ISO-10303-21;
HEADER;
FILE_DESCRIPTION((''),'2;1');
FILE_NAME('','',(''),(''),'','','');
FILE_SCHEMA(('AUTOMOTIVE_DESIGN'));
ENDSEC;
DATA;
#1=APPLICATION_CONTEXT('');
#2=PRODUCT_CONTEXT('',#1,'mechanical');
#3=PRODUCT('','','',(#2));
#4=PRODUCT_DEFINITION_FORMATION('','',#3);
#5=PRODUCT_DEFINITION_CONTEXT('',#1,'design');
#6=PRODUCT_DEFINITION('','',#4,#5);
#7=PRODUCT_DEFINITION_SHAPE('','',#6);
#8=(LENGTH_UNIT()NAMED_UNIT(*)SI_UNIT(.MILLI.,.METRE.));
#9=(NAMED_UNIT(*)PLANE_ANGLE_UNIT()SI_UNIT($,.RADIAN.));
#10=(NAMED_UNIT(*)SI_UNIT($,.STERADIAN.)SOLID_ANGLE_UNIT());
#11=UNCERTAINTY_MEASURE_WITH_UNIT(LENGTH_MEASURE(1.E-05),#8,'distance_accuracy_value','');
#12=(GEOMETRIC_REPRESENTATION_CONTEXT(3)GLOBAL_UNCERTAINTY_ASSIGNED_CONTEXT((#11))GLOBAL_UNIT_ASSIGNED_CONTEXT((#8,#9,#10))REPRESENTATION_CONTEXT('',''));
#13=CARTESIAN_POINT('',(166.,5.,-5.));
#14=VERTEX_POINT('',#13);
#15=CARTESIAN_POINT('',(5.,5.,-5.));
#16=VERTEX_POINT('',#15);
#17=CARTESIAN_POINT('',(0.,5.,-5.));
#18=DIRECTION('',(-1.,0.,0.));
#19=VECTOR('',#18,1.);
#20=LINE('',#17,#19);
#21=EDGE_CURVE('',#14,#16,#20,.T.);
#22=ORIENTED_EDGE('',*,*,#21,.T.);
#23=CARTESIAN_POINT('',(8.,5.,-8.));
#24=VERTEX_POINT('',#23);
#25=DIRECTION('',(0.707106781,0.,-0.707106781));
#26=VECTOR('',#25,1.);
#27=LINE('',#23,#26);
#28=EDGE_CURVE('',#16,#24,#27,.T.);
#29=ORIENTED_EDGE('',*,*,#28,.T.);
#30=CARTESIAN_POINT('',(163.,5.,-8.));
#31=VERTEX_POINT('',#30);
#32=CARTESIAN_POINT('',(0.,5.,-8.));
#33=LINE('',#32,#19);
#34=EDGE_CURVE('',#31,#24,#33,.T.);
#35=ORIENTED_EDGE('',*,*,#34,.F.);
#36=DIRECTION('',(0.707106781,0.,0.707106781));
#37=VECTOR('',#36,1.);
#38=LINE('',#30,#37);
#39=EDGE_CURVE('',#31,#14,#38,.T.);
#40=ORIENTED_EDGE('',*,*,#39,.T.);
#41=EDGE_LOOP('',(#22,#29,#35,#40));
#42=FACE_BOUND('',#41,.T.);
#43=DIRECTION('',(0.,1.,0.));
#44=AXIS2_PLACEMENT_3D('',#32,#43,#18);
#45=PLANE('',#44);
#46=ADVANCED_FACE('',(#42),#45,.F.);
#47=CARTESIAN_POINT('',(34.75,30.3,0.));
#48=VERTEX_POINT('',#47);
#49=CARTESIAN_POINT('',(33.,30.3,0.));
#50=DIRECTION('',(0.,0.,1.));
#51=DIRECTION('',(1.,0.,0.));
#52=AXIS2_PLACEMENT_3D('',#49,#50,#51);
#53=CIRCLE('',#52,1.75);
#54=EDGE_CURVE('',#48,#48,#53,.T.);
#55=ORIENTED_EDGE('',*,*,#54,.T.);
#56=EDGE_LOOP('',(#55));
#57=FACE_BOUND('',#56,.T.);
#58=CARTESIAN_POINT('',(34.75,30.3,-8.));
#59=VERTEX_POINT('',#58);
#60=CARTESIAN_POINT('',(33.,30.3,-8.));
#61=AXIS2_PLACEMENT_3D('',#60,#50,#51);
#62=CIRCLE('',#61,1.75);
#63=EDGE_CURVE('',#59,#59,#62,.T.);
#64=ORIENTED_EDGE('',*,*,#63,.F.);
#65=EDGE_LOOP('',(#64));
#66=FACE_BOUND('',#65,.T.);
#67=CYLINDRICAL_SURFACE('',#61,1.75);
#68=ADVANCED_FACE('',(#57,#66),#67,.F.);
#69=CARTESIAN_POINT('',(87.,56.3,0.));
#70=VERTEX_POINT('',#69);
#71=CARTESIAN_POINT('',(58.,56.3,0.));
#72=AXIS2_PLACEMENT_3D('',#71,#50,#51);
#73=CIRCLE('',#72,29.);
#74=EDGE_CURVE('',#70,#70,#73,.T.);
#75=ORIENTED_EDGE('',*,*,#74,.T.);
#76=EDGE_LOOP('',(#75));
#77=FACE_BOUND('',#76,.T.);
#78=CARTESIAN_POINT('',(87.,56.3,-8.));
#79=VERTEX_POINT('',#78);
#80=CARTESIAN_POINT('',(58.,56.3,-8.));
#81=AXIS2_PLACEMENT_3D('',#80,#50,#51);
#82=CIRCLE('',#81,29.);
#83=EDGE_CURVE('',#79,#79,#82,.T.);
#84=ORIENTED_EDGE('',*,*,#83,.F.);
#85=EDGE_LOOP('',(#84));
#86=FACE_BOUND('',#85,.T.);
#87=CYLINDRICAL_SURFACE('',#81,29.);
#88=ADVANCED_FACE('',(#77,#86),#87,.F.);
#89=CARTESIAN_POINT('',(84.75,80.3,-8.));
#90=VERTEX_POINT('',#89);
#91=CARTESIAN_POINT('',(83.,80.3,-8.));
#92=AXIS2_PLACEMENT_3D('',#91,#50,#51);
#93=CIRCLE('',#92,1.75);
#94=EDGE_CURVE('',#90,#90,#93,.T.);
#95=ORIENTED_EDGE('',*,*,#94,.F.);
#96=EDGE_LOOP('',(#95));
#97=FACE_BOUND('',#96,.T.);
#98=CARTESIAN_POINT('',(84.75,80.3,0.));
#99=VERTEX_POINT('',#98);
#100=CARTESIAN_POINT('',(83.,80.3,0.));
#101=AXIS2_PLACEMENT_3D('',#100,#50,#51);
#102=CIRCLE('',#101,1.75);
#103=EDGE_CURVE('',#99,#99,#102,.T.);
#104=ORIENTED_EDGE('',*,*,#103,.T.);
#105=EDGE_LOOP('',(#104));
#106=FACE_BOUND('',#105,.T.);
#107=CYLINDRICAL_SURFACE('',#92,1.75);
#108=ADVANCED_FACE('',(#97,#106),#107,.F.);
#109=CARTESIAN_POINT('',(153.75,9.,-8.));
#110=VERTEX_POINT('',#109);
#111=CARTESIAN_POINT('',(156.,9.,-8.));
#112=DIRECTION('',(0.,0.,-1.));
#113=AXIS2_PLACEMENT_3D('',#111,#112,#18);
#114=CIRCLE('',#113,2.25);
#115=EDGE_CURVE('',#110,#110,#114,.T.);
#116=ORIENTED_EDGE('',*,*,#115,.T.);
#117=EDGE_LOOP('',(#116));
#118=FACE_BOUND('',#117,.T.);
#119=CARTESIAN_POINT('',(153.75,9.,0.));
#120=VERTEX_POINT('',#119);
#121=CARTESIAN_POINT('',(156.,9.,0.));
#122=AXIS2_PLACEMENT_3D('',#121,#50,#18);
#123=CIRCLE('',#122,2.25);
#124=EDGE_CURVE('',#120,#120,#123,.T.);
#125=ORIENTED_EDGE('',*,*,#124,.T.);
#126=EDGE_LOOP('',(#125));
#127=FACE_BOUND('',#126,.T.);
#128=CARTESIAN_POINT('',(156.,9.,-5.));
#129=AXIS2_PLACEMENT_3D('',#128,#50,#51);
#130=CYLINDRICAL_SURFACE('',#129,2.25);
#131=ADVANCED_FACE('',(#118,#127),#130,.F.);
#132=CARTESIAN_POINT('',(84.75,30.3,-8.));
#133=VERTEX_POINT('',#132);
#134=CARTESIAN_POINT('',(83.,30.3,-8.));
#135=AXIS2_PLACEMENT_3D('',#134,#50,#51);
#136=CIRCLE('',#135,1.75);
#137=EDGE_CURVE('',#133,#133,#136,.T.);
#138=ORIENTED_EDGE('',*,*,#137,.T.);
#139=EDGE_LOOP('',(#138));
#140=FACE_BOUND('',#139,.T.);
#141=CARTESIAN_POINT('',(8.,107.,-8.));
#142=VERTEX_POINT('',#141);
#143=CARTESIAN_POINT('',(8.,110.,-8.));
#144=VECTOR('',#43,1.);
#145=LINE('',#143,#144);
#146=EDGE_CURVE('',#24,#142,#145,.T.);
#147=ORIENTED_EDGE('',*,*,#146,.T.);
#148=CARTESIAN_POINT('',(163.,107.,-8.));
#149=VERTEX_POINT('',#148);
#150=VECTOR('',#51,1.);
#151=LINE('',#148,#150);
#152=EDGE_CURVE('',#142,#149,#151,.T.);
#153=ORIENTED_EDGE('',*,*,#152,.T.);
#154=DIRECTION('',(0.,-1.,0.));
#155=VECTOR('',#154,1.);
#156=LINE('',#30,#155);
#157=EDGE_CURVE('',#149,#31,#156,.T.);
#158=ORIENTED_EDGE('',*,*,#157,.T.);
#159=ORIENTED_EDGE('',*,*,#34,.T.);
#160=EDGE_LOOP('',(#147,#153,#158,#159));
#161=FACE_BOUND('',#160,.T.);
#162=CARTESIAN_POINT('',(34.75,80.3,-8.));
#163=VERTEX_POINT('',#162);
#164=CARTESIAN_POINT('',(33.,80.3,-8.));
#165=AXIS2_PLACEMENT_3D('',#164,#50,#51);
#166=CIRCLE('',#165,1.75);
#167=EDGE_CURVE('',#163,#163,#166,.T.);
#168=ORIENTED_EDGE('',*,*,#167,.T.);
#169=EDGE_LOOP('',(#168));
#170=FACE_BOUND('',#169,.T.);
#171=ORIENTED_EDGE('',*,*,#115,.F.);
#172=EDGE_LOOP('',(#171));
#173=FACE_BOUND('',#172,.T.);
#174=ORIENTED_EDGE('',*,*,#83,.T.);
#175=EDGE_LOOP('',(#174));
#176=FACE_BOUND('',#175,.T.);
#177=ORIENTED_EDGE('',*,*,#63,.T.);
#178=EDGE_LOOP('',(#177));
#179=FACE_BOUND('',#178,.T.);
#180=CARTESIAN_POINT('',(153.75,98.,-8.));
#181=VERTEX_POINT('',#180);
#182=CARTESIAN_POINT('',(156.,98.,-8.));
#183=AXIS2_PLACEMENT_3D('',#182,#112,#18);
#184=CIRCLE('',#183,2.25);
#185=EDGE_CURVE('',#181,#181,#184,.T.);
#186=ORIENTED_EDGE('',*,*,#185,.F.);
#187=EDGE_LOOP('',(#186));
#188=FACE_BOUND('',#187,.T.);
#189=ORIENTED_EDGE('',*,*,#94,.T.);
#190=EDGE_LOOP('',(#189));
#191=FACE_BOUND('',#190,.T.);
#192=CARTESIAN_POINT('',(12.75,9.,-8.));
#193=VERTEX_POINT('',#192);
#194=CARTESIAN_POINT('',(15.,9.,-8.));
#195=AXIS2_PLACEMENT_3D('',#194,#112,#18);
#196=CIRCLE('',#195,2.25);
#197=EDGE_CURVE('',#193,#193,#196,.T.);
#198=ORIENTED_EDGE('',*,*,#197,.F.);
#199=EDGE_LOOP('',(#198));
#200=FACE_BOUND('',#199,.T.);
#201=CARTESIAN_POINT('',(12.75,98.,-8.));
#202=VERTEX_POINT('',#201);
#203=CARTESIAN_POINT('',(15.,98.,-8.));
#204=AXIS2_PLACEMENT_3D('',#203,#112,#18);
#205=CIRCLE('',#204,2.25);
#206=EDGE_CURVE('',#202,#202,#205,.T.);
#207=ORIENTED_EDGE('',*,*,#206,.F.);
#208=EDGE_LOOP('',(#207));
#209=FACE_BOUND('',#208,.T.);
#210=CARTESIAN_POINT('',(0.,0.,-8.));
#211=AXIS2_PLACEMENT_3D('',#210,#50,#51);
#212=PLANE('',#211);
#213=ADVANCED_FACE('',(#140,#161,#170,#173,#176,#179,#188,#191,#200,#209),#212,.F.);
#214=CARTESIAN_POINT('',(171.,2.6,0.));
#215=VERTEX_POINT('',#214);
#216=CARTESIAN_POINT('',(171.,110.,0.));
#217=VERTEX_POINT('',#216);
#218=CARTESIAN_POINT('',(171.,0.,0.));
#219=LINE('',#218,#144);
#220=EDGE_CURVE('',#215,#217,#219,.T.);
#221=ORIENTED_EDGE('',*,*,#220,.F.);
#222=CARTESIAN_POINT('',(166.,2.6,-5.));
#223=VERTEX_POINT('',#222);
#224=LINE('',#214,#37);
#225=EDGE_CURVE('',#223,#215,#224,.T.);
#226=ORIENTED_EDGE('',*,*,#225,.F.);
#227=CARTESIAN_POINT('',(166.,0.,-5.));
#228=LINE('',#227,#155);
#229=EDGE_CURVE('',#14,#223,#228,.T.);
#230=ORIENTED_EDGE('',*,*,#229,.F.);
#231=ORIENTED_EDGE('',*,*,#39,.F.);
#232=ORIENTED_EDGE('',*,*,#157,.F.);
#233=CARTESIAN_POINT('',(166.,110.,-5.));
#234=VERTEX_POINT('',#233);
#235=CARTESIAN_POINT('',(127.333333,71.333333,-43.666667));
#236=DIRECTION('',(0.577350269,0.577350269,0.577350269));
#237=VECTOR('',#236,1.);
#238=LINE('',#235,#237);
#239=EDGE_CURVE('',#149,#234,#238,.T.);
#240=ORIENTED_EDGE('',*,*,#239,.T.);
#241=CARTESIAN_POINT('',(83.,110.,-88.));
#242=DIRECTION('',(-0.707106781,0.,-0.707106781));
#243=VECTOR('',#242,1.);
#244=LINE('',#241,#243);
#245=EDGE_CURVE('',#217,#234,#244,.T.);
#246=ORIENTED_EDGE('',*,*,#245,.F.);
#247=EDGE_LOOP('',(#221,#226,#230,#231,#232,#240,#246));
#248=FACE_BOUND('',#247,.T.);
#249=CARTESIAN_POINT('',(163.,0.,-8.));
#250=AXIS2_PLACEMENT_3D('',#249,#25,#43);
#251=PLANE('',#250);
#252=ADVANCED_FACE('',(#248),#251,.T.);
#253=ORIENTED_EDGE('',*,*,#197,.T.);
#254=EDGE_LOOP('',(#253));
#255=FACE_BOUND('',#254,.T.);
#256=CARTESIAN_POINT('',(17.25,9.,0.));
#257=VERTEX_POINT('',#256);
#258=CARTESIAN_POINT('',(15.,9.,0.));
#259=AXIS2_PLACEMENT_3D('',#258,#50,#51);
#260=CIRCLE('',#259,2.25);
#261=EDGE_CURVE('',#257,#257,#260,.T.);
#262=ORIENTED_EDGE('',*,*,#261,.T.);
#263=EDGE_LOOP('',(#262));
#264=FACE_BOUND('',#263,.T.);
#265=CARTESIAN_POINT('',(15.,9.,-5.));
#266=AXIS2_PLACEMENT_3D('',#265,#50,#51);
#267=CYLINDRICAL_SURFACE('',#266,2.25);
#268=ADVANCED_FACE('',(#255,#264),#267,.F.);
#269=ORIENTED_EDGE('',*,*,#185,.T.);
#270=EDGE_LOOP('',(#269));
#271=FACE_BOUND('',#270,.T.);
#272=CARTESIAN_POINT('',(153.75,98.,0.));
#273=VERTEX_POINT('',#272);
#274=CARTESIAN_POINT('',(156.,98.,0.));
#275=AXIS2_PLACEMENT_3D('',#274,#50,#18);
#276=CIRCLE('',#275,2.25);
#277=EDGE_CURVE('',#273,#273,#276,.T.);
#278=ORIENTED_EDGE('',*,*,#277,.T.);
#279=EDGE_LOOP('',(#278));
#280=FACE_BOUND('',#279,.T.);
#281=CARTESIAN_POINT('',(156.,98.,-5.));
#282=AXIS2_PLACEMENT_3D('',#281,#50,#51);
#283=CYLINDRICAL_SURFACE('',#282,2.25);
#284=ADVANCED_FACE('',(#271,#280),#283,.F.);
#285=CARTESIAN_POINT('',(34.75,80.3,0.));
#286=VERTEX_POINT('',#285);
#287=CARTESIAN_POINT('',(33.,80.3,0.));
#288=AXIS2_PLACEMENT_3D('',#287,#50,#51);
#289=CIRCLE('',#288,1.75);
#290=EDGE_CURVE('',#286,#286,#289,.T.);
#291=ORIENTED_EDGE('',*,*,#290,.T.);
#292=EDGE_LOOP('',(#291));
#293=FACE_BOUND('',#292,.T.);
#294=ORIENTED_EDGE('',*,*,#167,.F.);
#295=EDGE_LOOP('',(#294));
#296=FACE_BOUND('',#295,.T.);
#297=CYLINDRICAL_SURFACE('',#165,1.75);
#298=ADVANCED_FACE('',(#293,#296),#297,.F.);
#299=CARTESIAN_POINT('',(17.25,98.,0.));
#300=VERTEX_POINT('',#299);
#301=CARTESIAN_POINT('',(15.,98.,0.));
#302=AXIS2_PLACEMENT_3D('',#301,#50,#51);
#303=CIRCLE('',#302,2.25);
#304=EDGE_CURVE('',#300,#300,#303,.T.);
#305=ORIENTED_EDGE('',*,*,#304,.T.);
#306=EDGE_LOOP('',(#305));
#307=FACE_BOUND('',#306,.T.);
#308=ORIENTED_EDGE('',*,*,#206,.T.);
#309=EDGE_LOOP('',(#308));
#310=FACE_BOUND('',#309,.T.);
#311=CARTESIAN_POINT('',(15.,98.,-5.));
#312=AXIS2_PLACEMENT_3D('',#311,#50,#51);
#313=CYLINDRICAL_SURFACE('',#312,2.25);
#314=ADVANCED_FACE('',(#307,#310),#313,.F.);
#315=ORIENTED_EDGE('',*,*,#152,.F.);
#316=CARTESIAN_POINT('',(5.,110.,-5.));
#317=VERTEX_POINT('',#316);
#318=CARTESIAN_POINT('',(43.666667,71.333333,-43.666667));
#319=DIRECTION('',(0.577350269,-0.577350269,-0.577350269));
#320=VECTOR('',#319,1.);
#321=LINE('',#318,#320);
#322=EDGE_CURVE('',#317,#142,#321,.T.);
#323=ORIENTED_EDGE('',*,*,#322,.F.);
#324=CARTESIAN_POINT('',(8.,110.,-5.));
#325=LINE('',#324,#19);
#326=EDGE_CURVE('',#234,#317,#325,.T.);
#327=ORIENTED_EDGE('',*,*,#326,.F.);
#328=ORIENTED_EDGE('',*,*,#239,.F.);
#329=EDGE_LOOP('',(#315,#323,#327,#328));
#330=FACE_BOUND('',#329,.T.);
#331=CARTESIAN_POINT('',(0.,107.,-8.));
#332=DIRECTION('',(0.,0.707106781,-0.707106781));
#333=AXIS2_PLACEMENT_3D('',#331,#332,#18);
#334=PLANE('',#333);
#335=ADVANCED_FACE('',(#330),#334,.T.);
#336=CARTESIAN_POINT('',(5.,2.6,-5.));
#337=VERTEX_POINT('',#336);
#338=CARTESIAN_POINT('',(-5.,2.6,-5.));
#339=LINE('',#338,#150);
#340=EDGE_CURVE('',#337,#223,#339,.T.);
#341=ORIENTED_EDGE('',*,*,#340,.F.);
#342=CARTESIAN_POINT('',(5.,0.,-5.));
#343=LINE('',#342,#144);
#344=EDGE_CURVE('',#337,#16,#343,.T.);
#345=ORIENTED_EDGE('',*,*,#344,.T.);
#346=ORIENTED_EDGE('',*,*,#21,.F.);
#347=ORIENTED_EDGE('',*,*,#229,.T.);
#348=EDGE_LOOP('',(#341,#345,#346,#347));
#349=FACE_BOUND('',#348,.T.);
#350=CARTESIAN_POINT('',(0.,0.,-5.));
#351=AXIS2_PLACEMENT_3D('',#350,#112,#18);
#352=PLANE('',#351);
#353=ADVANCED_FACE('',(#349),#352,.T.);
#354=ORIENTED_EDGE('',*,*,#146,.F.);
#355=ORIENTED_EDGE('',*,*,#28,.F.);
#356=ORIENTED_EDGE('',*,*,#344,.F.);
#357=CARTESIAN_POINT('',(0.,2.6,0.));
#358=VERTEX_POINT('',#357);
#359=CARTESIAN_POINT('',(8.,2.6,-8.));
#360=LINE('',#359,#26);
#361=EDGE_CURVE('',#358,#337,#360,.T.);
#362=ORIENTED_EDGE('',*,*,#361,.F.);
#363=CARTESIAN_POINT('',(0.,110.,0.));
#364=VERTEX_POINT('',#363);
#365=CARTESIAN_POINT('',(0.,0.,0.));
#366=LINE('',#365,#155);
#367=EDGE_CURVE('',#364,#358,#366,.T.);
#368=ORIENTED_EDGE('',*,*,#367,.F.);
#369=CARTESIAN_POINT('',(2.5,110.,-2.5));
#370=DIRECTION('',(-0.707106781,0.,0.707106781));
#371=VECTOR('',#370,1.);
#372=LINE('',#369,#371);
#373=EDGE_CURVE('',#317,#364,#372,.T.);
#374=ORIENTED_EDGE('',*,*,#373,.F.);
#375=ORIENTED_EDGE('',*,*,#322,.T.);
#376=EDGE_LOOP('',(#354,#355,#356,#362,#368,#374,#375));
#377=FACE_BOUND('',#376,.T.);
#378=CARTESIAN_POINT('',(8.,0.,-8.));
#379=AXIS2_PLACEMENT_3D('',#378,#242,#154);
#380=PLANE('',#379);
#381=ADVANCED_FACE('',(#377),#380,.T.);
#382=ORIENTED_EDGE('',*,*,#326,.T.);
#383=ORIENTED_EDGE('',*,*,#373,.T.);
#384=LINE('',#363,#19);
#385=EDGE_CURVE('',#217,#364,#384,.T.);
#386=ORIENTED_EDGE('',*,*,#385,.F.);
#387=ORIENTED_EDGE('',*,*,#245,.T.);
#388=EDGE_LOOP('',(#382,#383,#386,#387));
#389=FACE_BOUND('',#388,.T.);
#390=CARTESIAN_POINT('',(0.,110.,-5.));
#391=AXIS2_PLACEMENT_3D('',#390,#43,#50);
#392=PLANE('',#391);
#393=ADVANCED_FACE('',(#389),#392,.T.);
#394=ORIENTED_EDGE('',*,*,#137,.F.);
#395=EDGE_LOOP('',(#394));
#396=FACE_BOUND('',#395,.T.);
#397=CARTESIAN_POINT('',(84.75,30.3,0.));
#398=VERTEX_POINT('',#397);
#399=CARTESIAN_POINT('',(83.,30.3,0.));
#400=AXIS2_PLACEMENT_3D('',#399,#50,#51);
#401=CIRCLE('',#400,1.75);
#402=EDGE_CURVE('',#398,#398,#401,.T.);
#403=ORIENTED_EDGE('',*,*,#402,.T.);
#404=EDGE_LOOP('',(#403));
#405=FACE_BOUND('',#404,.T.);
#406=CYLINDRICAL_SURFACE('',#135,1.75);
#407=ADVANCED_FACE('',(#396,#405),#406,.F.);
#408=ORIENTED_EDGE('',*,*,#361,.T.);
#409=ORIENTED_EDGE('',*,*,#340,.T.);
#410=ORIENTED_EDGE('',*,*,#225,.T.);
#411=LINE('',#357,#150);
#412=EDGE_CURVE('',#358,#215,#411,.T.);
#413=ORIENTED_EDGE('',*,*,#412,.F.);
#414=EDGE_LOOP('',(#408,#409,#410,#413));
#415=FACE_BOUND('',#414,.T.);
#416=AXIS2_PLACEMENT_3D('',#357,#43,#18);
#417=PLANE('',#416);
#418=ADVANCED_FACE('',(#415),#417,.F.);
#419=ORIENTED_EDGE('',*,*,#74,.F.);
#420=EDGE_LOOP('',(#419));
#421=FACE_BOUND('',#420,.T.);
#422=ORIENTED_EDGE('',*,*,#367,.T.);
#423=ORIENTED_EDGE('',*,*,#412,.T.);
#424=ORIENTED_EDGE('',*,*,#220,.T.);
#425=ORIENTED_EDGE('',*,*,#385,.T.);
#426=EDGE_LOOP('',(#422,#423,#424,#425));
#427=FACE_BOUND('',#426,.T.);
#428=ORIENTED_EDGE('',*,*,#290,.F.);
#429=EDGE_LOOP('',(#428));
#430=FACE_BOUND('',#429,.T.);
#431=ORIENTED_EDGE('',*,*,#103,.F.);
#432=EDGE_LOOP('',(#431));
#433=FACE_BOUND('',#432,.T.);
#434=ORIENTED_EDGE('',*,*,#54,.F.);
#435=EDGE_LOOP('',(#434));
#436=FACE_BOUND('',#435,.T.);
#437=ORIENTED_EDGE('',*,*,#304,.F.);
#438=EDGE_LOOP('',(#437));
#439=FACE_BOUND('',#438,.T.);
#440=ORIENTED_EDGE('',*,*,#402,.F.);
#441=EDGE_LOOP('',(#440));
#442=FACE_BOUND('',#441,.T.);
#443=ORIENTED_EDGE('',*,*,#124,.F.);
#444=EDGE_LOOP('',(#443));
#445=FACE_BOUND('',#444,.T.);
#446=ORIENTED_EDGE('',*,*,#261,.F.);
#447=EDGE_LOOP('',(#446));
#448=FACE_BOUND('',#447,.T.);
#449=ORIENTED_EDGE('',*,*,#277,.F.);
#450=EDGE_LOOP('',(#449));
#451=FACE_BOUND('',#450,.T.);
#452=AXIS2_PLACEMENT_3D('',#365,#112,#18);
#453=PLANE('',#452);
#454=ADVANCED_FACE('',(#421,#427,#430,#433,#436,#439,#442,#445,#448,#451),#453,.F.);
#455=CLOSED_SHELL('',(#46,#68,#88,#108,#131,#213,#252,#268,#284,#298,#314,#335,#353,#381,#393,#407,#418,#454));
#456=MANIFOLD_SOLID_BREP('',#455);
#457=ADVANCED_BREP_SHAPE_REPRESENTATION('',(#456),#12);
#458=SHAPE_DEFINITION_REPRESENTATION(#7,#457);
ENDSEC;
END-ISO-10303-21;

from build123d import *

# Parameters (mm, degrees)
SKETCH1_W           = 171
SKETCH1_H           = 110
SKETCH1_R           = 2.25
BOSS_EXTRUDE1_DEPTH = 5
SKETCH2_W           = 171
SKETCH2_H           = 105
SKETCH2_R           = 2.25
BOSS_EXTRUDE2_DEPTH = 3
CHAMFER1_SIZE       = 8
CHAMFER3_SIZE       = 3
SKETCH3_W           = 7.071067812
SKETCH3_H           = 2.6
CUT_EXTRUDE1_DEPTH  = 232.587308883
SKETCH4_R           = 29
SKETCH4_R_2         = 1.75
CUT_EXTRUDE2_DEPTH  = 204.482185952


with BuildPart() as part:
    # Sketch1 → Boss-Extrude1 (new body)
    with BuildSketch(Plane.XY):
        with Locations((85.5, 55)):
            Rectangle(SKETCH1_W, SKETCH1_H)
        with Locations((15, 9)):
            Circle(SKETCH1_R, mode=Mode.SUBTRACT)
        with Locations(Location((156, 9, 0), (0, 0, 180))):
            Circle(SKETCH1_R, mode=Mode.SUBTRACT)
        with Locations((15, 98)):
            Circle(SKETCH1_R, mode=Mode.SUBTRACT)
        with Locations(Location((156, 98, 0), (0, 0, 180))):
            Circle(SKETCH1_R, mode=Mode.SUBTRACT)
    extrude(amount=-BOSS_EXTRUDE1_DEPTH)

    # Sketch2 → Boss-Extrude2 (add)
    with BuildSketch(Plane(origin=(0, 0, -5), x_dir=(-1, 0, 0), z_dir=(0, 0, -1))):
        with Locations((-85.5, 57.5)):
            Rectangle(SKETCH2_W, SKETCH2_H)
        with Locations(Location((-15, 9, 0), (0, 0, 180))):
            Circle(SKETCH2_R, mode=Mode.SUBTRACT)
        with Locations((-156, 9)):
            Circle(SKETCH2_R, mode=Mode.SUBTRACT)
        with Locations(Location((-15, 98, 0), (0, 0, 180))):
            Circle(SKETCH2_R, mode=Mode.SUBTRACT)
        with Locations((-156, 98)):
            Circle(SKETCH2_R, mode=Mode.SUBTRACT)
    extrude(amount=BOSS_EXTRUDE2_DEPTH)

    # Chamfer1
    # the kernel refuses this chamfer: 8 mm, written as the material it takes off along each edge
    with BuildSketch(Plane(origin=(171, -15.573463904, -8), x_dir=(-0.9996219169112968, 0, -0.027495876610586296), z_dir=(0, 1, 0)), Plane(origin=(0, 130.573463904, -8), x_dir=(0.9996219169112968, 0, -0.027495876610586275), z_dir=(0, -1, 0))) as chamfer1_piece_1:
        Polygon((CHAMFER1_SIZE * 0.999621916911, CHAMFER1_SIZE * 0.0274958766106), (-CHAMFER1_SIZE * 0.0274958766106, CHAMFER1_SIZE * 0.999621916911), (0, 0), align=None)
    extrude(amount=146.146927807, mode=Mode.SUBTRACT)

    # Chamfer3
    chamfer3_edges = [part.edges().sort_by_distance(p)[0] for p in [
        (85.5, 110, -8),
    ]]
    chamfer(chamfer3_edges, length=CHAMFER3_SIZE)

    # Sketch3 → Cut-Extrude1 (cut, through all, along a direction that is not the sketch's normal)
    with BuildSketch(Plane(origin=(85.5, 0, -85.5), x_dir=(-0.7071067811865452, 0, -0.7071067811865498), z_dir=(0.7071067811865498, 0, -0.7071067811865452))):
        with Locations((-117.379725677, 1.3)):
            Rectangle(SKETCH3_W, SKETCH3_H)
    extrude(amount=-CUT_EXTRUDE1_DEPTH, dir=(1, 0, 0), mode=Mode.SUBTRACT)

    # Sketch4 → Cut-Extrude2 (cut, through all)
    with BuildSketch(Plane.XY):
        with Locations((58, 56.3)):
            Circle(SKETCH4_R)
        with Locations((33, 80.3)):
            Circle(SKETCH4_R_2)
        with Locations((83, 80.3)):
            Circle(SKETCH4_R_2)
        with Locations((83, 30.3)):
            Circle(SKETCH4_R_2)
        with Locations((33, 30.3)):
            Circle(SKETCH4_R_2)
    extrude(amount=-CUT_EXTRUDE2_DEPTH, mode=Mode.SUBTRACT)


solid = part.part
